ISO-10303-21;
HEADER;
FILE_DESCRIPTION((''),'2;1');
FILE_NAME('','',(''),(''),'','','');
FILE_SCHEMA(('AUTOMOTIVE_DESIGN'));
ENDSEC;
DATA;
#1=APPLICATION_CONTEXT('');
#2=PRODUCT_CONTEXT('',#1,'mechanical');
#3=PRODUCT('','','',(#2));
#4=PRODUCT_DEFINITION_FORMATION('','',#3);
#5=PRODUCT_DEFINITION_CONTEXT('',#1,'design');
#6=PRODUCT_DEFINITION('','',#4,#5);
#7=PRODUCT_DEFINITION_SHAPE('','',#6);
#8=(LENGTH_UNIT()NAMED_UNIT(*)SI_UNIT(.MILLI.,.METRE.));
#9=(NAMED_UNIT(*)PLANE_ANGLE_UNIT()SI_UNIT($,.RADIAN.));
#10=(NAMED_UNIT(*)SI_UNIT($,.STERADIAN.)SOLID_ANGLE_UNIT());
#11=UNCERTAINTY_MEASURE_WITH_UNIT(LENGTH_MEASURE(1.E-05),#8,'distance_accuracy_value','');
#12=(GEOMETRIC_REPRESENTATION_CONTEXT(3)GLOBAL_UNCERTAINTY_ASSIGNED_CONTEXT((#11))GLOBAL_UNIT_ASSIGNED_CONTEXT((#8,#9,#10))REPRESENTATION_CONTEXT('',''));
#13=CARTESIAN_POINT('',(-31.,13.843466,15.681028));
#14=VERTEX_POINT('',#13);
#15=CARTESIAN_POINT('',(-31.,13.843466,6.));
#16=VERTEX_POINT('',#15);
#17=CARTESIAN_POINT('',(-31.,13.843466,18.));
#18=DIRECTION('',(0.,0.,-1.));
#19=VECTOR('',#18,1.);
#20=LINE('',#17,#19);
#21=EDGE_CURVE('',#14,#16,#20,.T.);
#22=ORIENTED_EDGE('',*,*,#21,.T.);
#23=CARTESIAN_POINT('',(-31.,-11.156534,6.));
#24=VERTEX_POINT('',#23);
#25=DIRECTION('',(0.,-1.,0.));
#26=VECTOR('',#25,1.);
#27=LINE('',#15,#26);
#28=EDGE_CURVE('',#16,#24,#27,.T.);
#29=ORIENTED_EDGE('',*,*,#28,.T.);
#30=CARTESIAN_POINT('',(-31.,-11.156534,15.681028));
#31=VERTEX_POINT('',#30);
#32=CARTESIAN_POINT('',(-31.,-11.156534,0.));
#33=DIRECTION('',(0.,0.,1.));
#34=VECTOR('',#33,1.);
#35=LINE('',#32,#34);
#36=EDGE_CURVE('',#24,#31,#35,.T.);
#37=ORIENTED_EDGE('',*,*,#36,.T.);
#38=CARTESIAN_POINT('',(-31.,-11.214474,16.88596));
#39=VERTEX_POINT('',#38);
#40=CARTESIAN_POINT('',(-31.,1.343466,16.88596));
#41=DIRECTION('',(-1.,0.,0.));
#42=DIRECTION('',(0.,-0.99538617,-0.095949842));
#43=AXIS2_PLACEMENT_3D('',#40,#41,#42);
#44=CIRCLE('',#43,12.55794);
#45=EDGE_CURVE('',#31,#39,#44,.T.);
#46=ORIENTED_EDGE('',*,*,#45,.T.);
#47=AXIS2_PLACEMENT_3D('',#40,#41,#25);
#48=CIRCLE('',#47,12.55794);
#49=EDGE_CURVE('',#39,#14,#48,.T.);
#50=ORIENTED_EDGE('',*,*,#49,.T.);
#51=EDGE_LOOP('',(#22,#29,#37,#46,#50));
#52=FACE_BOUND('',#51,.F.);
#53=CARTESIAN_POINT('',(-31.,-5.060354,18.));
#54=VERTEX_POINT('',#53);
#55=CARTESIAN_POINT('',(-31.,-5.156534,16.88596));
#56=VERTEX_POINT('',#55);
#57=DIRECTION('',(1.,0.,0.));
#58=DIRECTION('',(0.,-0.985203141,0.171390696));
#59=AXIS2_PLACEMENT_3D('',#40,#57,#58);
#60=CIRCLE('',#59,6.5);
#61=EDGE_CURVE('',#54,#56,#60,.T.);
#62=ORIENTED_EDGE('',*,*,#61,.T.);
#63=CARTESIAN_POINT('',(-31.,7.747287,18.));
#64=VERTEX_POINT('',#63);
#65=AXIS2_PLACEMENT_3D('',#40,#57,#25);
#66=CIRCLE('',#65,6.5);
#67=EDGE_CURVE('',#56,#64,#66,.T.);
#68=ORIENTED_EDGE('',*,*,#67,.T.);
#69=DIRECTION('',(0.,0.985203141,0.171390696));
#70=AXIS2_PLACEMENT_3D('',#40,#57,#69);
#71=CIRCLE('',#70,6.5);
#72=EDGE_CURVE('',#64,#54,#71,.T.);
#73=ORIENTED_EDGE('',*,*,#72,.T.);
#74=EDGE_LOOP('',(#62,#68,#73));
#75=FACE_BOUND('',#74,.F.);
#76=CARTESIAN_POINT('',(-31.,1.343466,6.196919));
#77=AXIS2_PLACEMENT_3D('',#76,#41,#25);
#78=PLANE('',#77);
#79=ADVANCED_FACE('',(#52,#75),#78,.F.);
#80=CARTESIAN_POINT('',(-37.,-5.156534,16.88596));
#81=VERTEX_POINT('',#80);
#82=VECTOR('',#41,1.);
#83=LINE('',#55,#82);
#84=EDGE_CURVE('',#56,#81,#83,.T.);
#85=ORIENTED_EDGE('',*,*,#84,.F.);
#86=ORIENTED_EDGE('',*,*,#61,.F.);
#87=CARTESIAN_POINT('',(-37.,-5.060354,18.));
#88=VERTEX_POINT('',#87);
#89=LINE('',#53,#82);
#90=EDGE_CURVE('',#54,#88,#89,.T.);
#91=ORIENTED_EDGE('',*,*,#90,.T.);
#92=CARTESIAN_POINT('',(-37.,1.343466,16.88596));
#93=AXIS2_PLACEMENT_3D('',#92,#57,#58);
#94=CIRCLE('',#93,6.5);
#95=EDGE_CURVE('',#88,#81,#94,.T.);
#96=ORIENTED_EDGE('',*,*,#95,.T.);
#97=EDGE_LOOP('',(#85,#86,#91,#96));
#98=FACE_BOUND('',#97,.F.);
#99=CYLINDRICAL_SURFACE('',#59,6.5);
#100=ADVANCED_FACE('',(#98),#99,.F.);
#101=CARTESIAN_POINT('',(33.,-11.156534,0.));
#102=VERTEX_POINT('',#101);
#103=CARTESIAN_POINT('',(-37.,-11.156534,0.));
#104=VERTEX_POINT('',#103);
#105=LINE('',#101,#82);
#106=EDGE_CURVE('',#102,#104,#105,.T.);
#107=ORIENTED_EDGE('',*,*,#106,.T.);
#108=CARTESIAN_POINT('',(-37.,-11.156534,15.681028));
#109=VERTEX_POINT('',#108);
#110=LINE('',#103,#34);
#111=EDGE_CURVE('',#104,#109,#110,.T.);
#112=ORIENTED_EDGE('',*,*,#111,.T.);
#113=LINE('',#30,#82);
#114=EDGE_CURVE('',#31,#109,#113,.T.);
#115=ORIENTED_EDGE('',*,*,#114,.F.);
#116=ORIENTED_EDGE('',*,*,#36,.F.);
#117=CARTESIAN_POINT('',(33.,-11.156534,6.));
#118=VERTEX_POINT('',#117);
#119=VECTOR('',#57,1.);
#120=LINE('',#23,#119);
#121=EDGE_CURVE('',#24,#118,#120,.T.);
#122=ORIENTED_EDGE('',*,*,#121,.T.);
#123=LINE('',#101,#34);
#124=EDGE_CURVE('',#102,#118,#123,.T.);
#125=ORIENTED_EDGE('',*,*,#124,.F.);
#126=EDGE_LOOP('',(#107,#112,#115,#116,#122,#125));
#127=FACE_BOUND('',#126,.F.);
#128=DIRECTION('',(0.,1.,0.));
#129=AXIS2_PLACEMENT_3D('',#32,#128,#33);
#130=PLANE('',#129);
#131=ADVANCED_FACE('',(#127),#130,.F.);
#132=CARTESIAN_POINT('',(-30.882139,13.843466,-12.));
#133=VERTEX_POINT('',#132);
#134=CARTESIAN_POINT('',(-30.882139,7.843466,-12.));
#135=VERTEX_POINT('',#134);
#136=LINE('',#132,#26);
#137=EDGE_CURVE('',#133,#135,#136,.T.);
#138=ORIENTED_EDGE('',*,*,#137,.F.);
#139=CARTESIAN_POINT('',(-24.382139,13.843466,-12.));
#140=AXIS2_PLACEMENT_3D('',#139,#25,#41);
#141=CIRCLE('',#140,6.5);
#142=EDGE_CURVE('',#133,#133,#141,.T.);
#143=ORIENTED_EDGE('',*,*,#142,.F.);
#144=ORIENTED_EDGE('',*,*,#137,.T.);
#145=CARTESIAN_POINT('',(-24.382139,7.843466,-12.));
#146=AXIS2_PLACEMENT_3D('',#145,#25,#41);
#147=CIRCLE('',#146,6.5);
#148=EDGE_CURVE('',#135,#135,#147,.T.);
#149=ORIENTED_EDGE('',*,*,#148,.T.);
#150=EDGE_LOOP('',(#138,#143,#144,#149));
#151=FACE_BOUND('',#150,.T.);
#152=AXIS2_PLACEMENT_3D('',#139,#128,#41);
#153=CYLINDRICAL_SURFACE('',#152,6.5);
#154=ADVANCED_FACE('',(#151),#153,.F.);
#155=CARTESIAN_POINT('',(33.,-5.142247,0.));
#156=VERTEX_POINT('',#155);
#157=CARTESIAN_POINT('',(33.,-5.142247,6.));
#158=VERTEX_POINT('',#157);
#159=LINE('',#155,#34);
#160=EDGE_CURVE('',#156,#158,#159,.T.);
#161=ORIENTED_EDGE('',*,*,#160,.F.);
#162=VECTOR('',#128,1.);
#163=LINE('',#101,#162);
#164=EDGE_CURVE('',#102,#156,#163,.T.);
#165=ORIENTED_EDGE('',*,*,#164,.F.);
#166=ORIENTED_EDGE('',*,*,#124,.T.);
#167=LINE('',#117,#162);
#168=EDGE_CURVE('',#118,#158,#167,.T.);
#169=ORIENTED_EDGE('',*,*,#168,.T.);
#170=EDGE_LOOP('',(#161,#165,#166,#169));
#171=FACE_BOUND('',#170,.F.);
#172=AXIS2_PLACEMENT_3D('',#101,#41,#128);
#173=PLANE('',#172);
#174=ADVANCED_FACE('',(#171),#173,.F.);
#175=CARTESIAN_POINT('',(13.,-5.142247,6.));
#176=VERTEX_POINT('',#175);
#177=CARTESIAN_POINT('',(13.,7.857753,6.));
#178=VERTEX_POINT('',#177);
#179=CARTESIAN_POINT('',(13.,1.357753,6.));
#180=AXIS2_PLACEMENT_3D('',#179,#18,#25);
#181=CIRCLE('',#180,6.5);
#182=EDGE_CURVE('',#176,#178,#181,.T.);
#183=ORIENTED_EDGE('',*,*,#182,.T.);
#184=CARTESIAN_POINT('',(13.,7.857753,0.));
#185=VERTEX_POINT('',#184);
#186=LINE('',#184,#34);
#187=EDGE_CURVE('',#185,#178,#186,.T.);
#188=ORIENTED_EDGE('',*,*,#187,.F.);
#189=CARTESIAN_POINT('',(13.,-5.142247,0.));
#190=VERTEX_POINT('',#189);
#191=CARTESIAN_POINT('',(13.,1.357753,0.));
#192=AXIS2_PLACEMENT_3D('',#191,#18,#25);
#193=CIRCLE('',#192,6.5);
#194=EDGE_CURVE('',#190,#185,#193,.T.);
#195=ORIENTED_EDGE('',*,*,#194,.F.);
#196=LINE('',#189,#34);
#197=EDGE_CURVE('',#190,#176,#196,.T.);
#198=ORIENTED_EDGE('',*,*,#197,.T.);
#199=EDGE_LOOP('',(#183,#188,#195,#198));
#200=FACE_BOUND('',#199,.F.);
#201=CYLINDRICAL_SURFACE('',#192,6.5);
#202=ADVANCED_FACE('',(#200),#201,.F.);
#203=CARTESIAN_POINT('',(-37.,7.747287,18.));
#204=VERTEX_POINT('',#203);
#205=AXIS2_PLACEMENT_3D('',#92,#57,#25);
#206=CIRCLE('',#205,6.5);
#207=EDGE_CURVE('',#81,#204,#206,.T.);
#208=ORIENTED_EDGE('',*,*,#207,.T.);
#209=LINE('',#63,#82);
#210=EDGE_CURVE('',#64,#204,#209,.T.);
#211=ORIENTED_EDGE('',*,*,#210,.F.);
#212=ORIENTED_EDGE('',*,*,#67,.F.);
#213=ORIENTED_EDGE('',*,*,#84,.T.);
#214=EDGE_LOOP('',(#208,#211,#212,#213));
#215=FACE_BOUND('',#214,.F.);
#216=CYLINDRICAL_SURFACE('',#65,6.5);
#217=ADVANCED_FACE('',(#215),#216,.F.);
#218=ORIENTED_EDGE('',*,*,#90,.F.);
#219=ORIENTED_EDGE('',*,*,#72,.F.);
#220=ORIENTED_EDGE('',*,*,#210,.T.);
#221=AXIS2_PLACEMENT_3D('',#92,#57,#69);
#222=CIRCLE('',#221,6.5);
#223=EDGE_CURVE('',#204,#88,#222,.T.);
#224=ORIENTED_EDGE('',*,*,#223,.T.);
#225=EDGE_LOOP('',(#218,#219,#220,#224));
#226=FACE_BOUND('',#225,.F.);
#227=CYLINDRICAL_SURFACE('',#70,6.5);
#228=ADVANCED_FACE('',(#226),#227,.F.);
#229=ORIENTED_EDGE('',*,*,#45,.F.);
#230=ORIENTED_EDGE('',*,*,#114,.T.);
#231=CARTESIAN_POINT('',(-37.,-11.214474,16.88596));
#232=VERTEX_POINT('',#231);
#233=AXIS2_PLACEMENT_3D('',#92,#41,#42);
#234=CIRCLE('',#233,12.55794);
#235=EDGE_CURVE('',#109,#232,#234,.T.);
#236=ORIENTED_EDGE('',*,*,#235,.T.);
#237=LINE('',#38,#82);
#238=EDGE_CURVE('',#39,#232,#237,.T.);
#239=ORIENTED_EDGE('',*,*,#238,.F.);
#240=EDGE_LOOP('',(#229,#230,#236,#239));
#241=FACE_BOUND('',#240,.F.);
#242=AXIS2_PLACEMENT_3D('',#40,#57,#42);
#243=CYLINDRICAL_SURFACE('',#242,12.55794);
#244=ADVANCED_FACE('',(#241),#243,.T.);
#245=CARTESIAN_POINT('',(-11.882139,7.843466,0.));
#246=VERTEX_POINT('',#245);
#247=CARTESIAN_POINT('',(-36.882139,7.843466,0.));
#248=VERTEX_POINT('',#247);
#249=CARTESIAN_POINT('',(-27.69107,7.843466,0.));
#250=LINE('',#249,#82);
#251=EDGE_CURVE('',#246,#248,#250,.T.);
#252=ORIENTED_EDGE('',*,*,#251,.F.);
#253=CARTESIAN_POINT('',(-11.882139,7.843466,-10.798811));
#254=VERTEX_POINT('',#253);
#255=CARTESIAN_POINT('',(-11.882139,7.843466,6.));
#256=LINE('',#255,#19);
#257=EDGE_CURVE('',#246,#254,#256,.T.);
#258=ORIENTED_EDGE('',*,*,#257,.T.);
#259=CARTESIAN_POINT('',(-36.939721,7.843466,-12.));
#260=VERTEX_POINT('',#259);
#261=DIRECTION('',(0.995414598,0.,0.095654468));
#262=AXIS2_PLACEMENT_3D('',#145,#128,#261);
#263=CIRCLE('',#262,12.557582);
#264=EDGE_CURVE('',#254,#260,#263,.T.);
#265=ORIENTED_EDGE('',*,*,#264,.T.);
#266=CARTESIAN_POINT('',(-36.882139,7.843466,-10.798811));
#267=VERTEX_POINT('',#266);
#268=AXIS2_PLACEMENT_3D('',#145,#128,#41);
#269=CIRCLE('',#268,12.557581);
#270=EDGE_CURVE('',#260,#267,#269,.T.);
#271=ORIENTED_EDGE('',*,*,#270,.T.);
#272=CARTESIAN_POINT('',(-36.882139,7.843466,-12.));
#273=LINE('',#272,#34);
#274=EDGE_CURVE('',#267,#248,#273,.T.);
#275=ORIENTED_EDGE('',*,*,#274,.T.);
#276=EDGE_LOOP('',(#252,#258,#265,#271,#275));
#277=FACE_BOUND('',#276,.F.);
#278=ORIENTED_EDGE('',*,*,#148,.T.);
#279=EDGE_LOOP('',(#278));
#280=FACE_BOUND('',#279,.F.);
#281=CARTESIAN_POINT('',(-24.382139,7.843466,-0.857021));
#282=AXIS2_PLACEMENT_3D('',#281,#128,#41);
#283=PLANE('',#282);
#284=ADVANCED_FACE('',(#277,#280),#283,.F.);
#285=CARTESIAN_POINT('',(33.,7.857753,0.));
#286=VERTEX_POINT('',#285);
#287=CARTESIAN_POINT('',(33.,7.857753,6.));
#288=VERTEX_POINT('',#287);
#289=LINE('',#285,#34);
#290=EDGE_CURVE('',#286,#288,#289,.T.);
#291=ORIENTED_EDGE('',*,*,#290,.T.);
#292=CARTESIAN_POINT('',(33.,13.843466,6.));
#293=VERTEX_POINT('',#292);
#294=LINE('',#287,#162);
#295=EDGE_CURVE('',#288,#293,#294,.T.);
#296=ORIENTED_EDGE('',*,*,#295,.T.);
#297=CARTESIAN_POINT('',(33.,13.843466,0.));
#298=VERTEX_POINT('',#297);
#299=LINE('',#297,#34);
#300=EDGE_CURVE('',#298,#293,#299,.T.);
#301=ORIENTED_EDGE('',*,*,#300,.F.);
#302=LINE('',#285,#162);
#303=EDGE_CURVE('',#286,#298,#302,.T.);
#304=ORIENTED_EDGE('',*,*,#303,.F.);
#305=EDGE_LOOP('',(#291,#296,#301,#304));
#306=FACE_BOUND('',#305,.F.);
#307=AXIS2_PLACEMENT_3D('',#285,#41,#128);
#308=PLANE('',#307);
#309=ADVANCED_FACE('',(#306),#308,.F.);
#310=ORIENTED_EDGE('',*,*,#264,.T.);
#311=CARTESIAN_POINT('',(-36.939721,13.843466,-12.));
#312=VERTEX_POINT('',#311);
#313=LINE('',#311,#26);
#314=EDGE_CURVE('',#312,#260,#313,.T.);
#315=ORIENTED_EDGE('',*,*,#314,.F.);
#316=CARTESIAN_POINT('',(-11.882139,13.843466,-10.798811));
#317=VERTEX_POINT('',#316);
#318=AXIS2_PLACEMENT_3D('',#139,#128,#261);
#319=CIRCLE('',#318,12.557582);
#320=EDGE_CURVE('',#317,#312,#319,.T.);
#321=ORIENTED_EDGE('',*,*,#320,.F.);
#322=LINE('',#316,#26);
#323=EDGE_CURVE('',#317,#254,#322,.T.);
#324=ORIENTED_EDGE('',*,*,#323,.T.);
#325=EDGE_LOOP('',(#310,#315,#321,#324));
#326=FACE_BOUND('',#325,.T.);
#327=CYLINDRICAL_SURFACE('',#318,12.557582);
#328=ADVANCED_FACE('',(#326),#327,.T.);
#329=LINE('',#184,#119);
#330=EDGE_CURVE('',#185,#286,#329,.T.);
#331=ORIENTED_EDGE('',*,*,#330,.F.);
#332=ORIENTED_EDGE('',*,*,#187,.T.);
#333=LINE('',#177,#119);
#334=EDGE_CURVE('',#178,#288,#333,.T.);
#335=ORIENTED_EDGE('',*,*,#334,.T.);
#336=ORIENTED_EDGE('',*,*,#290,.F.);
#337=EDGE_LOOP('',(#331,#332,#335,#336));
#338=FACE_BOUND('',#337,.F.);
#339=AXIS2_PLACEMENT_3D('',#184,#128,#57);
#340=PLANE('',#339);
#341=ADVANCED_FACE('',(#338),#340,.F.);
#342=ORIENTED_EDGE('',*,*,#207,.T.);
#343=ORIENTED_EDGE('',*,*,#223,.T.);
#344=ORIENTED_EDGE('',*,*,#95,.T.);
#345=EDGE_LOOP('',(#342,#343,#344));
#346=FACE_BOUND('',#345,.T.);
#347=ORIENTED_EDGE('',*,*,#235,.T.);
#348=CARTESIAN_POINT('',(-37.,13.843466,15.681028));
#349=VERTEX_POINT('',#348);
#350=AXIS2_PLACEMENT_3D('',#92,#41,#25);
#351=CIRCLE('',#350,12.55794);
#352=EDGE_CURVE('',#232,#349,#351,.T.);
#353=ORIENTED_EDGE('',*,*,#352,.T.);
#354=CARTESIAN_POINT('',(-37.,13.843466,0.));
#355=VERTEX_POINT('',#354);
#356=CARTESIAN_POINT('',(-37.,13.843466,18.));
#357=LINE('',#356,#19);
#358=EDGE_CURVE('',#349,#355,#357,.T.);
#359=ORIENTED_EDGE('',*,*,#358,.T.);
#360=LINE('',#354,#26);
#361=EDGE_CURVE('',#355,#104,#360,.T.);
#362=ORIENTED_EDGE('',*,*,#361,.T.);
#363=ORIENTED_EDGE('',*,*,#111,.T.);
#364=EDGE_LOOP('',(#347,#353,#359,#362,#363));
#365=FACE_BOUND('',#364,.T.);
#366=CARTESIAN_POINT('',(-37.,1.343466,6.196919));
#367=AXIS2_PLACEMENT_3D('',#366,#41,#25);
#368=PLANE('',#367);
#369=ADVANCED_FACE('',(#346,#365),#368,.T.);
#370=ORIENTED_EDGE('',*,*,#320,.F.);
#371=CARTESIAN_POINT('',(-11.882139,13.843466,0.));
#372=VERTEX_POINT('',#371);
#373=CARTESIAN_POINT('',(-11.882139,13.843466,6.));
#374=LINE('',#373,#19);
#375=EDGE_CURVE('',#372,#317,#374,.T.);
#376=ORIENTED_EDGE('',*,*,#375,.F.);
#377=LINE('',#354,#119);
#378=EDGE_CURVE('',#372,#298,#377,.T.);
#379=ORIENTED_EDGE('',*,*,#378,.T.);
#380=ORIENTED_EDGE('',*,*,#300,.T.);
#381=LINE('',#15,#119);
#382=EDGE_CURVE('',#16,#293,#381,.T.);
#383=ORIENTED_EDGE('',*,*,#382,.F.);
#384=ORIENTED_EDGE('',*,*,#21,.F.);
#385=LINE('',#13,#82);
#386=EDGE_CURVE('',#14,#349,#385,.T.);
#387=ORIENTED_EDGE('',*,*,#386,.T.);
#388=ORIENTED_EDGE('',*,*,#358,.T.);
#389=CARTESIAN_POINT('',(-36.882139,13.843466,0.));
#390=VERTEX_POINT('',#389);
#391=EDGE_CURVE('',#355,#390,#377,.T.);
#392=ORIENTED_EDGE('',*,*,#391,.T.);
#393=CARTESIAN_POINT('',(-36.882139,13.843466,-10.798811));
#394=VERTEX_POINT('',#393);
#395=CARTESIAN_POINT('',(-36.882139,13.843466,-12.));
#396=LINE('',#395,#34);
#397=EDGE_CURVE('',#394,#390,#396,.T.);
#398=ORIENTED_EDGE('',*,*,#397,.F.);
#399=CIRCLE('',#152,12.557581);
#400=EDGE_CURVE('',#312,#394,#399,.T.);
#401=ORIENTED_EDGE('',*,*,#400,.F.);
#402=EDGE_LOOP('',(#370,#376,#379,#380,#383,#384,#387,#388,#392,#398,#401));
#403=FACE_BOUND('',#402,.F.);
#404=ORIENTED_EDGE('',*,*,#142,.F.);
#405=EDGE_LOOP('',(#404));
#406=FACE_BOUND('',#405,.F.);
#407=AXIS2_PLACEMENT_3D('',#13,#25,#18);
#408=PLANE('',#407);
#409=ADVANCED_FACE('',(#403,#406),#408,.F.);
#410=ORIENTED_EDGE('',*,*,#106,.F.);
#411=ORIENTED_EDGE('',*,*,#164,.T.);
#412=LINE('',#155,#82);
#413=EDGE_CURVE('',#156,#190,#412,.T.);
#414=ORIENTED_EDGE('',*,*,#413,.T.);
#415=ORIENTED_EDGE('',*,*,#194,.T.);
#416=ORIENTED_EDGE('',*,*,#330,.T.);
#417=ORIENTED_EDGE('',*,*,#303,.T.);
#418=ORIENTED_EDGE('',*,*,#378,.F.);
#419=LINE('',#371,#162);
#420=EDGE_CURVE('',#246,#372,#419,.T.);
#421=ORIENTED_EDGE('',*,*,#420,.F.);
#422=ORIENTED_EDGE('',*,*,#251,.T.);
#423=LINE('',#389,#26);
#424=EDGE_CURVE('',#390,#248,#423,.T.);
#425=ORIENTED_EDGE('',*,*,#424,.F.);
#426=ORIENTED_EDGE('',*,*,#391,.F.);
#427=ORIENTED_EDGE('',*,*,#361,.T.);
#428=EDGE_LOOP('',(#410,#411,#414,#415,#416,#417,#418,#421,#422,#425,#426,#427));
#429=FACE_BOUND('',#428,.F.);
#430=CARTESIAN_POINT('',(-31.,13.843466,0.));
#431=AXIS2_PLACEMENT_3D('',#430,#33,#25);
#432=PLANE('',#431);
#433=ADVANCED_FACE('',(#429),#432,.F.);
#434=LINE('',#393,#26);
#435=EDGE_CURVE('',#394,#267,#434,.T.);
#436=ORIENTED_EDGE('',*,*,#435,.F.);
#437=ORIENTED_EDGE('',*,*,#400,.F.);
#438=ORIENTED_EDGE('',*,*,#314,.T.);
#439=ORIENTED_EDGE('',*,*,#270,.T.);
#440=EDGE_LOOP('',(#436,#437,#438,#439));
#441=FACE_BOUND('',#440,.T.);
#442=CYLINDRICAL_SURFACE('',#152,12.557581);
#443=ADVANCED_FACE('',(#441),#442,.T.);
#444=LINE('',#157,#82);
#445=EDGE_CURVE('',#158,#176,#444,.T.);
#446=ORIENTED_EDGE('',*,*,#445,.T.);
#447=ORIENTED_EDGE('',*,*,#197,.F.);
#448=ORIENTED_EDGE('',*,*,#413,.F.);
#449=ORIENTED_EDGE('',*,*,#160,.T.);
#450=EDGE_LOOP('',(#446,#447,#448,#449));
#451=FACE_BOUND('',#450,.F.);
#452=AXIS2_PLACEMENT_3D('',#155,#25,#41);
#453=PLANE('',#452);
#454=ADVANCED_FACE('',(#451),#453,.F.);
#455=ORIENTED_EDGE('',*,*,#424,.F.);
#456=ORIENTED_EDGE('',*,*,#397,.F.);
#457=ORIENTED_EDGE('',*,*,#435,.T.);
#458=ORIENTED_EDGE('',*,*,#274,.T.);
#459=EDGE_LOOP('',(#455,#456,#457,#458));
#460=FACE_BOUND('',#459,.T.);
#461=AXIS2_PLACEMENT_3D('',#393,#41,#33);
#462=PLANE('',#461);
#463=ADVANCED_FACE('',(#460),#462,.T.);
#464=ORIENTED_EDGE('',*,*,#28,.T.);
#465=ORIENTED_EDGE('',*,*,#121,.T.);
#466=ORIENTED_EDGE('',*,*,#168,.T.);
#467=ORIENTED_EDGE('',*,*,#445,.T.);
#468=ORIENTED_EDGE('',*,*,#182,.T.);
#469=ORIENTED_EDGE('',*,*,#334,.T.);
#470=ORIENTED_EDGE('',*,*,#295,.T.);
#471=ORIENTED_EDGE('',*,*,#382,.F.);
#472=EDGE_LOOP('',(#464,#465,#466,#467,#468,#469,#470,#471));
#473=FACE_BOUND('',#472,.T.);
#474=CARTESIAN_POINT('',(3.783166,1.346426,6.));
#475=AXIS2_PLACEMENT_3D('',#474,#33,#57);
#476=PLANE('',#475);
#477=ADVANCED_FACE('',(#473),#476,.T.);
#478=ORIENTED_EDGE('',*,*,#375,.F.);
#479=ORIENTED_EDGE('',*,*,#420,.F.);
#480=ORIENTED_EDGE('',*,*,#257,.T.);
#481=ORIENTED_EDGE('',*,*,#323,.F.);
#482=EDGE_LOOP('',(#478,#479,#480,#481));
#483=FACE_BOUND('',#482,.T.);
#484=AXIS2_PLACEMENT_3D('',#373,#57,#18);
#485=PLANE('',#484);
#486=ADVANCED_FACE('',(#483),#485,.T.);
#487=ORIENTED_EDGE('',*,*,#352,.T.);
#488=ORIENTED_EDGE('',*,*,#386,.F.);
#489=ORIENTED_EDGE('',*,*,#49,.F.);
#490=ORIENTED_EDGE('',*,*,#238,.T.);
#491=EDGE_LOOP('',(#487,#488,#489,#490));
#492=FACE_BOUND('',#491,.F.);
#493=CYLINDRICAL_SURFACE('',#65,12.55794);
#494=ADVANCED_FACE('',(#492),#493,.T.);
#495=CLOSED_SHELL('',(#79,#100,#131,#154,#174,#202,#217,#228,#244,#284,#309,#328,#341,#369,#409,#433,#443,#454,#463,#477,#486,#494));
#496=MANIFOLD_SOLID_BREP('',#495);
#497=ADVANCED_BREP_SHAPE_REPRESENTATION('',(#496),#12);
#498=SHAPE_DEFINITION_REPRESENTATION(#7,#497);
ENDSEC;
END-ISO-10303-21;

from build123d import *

# Parameters (mm, degrees)
F1_DEPTH = 6
F3_DEPTH = 6
F5_DEPTH = 6


# Not quite as in the source:
# - a feature names something its author has since deleted; it is built from what else it names


with BuildPart() as f1:
    # F0 (on Top) → F1 (new body)
    with BuildSketch(Plane.XY):
        with BuildLine():
            Line((33, 13.8434663415), (-31, 13.8434663415))
            Line((-31, 13.8434663415), (-31, -11.1565336585))
            Line((-31, -11.1565336585), (33, -11.1565336585))
            Line((33, -11.1565336585), (33, -5.1422468387))
            Line((33, -5.1422468387), (13, -5.1422468387))
            ThreePointArc((13, -5.1422468387), (6.5, 1.3577531613), (13, 7.8577531613))
            Line((13, 7.8577531613), (33, 7.8577531613))
            Line((33, 7.8577531613), (33, 13.8434663415))
        make_face()
    extrude(amount=F1_DEPTH)

    # F2 (on face) → F3 (join)
    with BuildSketch(Plane(origin=(-31, 0, 0), x_dir=(0, -1, 0), z_dir=(-1, 0, 0))):
        with BuildLine():
            Line((-13.8434663415, 0), (11.1565336585, 0))
            Line((11.1565336585, 0), (11.1565336585, 15.6810280987))
            ThreePointArc((11.1565336585, 15.6810280987), (-1.3434663415, 4.3280202761), (-13.8434663415, 15.6810280987))
            Line((-13.8434663415, 15.6810280987), (-13.8434663415, 0))
        make_face()
        with BuildLine():
            ThreePointArc((-13.8434663415, 15.6810280987), (-1.3434663415, 4.3280202761), (11.1565336585, 15.6810280987))
            Line((11.1565336585, 15.6810280987), (11.1565336585, 18))
            Line((11.1565336585, 18), (5.0603540757, 18))
            ThreePointArc((5.0603540757, 18), (5.1324441239, 17.4450522775), (5.1565336585, 16.8859604746))
            ThreePointArc((5.1565336585, 16.8859604746), (-1.9025581444, 10.4100500092), (-7.7472867587, 18))
            Line((-7.7472867587, 18), (-13.8434663415, 18))
            Line((-13.8434663415, 18), (-13.8434663415, 15.6810280987))
        make_face()
        with BuildLine():
            Line((11.1565336585, 18), (11.1565336585, 15.6810280987))
            ThreePointArc((11.1565336585, 15.6810280987), (11.1999804438, 16.2827981629), (11.2144738571, 16.8859604746))
            ThreePointArc((11.2144738571, 16.8859604746), (-1.9466286532, 29.4294072599), (-13.8434663415, 15.6810280987))
            Line((-13.8434663415, 15.6810280987), (-13.8434663415, 18))
            Line((-13.8434663415, 18), (-7.7472867587, 18))
            ThreePointArc((-7.7472867587, 18), (-1.3434663415, 23.3859604746), (5.0603540757, 18))
            Line((5.0603540757, 18), (11.1565336585, 18))
        make_face()
    extrude(amount=F3_DEPTH)

    # F4 (on face) → F5 (join)
    with BuildSketch(Plane(origin=(0, 13.8434663415, 0), x_dir=(-1, 0, 0), z_dir=(0, 1, 0))):
        with BuildLine():
            Line((36.8821393698, 6), (11.8821393698, 6))
            Line((11.8821393698, 6), (11.8821393698, -10.7988112149))
            ThreePointArc((11.8821393698, -10.7988112149), (24.3821393698, 0.5575815545), (36.8821393698, -10.7988112149))
            Line((36.8821393698, -10.7988112149), (36.8821393698, 6))
        make_face()
        with BuildLine():
            ThreePointArc((36.8821393698, -10.7988112149), (24.3821393698, 0.5575815545), (11.8821393698, -10.7988112149))
            Line((11.8821393698, -10.7988112149), (11.8821393698, -12))
            Line((11.8821393698, -12), (17.8821393698, -12))
            ThreePointArc((17.8821393698, -12), (24.3821393698, -5.5), (30.8821393698, -12))
            Line((30.8821393698, -12), (36.8821393698, -12))
            Line((36.8821393698, -12), (36.8821393698, -10.7988112149))
        make_face()
        with BuildLine():
            Line((11.8821393698, -12), (11.8821393698, -10.7988112149))
            ThreePointArc((11.8821393698, -10.7988112149), (23.7808552995, -24.5431779053), (36.9397209243, -12))
            ThreePointArc((36.9397209243, -12), (36.9253172752, -11.3987159297), (36.8821393698, -10.7988112149))
            Line((36.8821393698, -10.7988112149), (36.8821393698, -12))
            Line((36.8821393698, -12), (30.8821393698, -12))
            ThreePointArc((30.8821393698, -12), (24.3821393698, -18.5), (17.8821393698, -12))
            Line((17.8821393698, -12), (11.8821393698, -12))
        make_face()
    extrude(amount=-F5_DEPTH)


solid = f1.part
